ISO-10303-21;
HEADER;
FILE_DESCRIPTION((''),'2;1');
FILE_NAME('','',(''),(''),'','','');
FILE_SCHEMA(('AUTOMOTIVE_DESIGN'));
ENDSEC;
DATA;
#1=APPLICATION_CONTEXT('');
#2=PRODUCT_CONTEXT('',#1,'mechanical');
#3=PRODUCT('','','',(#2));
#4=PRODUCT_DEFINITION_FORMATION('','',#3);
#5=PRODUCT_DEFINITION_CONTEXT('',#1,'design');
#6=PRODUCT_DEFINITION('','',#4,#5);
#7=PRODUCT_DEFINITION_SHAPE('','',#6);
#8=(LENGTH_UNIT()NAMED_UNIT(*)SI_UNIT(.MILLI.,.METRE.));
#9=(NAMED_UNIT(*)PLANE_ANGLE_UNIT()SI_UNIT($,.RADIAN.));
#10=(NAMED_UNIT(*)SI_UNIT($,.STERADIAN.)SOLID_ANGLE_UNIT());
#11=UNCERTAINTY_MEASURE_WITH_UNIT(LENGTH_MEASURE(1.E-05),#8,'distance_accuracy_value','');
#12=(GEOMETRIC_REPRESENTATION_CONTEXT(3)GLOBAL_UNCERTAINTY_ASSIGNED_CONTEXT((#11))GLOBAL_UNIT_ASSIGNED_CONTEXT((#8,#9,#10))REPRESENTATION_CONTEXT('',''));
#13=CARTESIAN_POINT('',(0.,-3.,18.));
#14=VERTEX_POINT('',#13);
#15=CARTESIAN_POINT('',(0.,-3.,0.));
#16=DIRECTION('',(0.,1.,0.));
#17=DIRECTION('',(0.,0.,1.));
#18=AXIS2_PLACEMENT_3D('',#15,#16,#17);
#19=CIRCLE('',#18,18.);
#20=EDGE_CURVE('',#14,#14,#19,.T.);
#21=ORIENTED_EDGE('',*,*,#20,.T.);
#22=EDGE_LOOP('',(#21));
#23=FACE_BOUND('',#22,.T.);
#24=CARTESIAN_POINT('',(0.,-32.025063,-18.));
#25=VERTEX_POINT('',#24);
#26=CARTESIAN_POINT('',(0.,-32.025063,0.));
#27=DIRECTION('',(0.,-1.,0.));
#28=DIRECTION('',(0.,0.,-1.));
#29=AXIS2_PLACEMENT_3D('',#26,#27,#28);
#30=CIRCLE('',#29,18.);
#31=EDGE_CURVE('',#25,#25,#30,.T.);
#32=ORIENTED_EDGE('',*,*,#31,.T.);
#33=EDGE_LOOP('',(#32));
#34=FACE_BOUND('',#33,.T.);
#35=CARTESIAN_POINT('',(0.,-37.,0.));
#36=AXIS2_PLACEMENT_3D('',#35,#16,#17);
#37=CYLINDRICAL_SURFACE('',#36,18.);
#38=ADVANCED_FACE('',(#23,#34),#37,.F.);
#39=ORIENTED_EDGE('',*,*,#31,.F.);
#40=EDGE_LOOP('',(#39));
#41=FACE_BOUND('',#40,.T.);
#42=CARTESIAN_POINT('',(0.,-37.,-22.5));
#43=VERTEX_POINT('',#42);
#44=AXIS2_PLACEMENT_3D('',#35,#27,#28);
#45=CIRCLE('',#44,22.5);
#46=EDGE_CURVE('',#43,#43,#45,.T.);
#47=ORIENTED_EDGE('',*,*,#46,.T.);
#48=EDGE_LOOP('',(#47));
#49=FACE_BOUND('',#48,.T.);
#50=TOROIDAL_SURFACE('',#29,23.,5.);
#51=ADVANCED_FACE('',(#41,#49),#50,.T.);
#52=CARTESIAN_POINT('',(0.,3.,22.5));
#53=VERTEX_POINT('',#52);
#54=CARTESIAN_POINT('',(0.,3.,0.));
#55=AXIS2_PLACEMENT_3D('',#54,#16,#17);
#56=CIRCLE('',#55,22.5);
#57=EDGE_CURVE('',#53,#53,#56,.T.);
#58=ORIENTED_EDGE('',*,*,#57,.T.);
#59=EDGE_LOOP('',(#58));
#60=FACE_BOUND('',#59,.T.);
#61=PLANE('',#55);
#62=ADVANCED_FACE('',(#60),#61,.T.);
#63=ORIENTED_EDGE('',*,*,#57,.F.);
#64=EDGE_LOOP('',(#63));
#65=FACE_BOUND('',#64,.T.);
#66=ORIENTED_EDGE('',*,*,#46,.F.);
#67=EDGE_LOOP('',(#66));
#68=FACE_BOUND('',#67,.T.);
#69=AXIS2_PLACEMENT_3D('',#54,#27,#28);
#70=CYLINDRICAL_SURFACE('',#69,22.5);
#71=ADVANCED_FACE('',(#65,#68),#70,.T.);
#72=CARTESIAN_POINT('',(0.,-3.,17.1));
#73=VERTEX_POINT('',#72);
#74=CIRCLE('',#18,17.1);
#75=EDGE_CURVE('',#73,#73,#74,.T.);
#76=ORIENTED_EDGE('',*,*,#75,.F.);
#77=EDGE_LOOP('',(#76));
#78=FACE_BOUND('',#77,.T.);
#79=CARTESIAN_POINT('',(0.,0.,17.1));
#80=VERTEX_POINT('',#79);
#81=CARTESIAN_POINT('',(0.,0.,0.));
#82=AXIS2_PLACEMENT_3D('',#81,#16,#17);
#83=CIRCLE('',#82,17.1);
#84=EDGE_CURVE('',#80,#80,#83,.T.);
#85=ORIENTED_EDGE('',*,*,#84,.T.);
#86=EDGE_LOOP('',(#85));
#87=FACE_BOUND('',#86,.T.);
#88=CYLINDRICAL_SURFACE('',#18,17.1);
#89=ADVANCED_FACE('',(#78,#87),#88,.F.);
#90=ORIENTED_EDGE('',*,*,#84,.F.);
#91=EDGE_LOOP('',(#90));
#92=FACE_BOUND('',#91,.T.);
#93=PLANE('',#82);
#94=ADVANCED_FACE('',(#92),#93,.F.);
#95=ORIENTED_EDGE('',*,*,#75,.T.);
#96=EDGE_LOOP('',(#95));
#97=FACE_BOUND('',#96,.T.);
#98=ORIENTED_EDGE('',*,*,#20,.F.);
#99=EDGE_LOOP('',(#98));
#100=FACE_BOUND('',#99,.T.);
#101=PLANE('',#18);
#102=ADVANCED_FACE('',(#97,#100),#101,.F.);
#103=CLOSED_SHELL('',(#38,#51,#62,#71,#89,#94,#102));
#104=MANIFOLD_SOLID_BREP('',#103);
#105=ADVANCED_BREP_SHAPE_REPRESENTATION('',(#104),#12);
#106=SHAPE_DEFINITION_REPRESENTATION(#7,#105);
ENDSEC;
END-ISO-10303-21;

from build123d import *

# Parameters (mm, degrees)
SKETCH1_R           = 22.5
BOSS_EXTRUDE1_DEPTH = 3
BOSS_EXTRUDE2_START = 37
SKETCH2_R           = 22.5
SKETCH2_R_2         = 18
BOSS_EXTRUDE2_DEPTH = 37
FILLET1_R           = 5
BOSS_EXTRUDE3_START = -6
SKETCH3_R           = 18
SKETCH3_R_2         = 17.100000000000033
BOSS_EXTRUDE3_DEPTH = 6


with BuildPart() as part:
    # Sketch1 → Boss-Extrude1 (new body)
    with BuildSketch(Plane(origin=(0, 0, 0), x_dir=(1, 0, 0), z_dir=(0, 1, 0))):
        with Locations(Location((0, 0, 0), (0, 0, 270))):
            Circle(SKETCH1_R)
    extrude(amount=BOSS_EXTRUDE1_DEPTH)

    # Sketch2 → Boss-Extrude2 (add)
    with BuildSketch(Plane(origin=(0, 0, 0), x_dir=(-1, 0, 0), z_dir=(0, -1, 0)).offset(BOSS_EXTRUDE2_START)):
        with Locations(Location((0, 0, 0), (0, 0, 90))):
            Circle(SKETCH2_R)
        with Locations(Location((0, 0, 0), (0, 0, 90))):
            Circle(SKETCH2_R_2, mode=Mode.SUBTRACT)
    extrude(amount=-BOSS_EXTRUDE2_DEPTH)

    # Fillet1
    # the kernel refuses this fillet: 5 mm, written as the material it takes off along each edge
    with BuildSketch(Plane(origin=(0, -37, 0), x_dir=(-6e-17, 0, -1), z_dir=(-1, 0, 6e-17))) as fillet1_piece_1:
        with BuildLine():
            CenterArc((23, -4.974937185533101), FILLET1_R, 95.73917047726678, 84.26082952273322)
            Line((18, -4.974937185533101), (17.9, -4.974937185533101))
            Line((17.9, -4.974937185533101), (17.9, 0))
            Line((17.9, 0), (18, 0.10000000000000142))
            ThreePointArc((18, 0.10000000000000142), (20.25, 0.10000000000000142), (22.49, 0.09949874371066159))
            Line((22.49, 0.09949874371066159), (22.5, 0))
        make_face()
    revolve(axis=Axis((0, -37, 0), (0, -1, 0)), mode=Mode.SUBTRACT)

    # Sketch3 → Boss-Extrude3 (add)
    with BuildSketch(Plane(origin=(0, 3, 0), x_dir=(1, 0, 0), z_dir=(0, 1, 0)).offset(BOSS_EXTRUDE3_START)):
        with Locations(Location((0, 0, 0), (0, 0, 270))):
            Circle(SKETCH3_R)
        with Locations(Location((0, 0, 0), (0, 0, 270))):
            Circle(SKETCH3_R_2, mode=Mode.SUBTRACT)
    extrude(amount=BOSS_EXTRUDE3_DEPTH)


solid = part.part
